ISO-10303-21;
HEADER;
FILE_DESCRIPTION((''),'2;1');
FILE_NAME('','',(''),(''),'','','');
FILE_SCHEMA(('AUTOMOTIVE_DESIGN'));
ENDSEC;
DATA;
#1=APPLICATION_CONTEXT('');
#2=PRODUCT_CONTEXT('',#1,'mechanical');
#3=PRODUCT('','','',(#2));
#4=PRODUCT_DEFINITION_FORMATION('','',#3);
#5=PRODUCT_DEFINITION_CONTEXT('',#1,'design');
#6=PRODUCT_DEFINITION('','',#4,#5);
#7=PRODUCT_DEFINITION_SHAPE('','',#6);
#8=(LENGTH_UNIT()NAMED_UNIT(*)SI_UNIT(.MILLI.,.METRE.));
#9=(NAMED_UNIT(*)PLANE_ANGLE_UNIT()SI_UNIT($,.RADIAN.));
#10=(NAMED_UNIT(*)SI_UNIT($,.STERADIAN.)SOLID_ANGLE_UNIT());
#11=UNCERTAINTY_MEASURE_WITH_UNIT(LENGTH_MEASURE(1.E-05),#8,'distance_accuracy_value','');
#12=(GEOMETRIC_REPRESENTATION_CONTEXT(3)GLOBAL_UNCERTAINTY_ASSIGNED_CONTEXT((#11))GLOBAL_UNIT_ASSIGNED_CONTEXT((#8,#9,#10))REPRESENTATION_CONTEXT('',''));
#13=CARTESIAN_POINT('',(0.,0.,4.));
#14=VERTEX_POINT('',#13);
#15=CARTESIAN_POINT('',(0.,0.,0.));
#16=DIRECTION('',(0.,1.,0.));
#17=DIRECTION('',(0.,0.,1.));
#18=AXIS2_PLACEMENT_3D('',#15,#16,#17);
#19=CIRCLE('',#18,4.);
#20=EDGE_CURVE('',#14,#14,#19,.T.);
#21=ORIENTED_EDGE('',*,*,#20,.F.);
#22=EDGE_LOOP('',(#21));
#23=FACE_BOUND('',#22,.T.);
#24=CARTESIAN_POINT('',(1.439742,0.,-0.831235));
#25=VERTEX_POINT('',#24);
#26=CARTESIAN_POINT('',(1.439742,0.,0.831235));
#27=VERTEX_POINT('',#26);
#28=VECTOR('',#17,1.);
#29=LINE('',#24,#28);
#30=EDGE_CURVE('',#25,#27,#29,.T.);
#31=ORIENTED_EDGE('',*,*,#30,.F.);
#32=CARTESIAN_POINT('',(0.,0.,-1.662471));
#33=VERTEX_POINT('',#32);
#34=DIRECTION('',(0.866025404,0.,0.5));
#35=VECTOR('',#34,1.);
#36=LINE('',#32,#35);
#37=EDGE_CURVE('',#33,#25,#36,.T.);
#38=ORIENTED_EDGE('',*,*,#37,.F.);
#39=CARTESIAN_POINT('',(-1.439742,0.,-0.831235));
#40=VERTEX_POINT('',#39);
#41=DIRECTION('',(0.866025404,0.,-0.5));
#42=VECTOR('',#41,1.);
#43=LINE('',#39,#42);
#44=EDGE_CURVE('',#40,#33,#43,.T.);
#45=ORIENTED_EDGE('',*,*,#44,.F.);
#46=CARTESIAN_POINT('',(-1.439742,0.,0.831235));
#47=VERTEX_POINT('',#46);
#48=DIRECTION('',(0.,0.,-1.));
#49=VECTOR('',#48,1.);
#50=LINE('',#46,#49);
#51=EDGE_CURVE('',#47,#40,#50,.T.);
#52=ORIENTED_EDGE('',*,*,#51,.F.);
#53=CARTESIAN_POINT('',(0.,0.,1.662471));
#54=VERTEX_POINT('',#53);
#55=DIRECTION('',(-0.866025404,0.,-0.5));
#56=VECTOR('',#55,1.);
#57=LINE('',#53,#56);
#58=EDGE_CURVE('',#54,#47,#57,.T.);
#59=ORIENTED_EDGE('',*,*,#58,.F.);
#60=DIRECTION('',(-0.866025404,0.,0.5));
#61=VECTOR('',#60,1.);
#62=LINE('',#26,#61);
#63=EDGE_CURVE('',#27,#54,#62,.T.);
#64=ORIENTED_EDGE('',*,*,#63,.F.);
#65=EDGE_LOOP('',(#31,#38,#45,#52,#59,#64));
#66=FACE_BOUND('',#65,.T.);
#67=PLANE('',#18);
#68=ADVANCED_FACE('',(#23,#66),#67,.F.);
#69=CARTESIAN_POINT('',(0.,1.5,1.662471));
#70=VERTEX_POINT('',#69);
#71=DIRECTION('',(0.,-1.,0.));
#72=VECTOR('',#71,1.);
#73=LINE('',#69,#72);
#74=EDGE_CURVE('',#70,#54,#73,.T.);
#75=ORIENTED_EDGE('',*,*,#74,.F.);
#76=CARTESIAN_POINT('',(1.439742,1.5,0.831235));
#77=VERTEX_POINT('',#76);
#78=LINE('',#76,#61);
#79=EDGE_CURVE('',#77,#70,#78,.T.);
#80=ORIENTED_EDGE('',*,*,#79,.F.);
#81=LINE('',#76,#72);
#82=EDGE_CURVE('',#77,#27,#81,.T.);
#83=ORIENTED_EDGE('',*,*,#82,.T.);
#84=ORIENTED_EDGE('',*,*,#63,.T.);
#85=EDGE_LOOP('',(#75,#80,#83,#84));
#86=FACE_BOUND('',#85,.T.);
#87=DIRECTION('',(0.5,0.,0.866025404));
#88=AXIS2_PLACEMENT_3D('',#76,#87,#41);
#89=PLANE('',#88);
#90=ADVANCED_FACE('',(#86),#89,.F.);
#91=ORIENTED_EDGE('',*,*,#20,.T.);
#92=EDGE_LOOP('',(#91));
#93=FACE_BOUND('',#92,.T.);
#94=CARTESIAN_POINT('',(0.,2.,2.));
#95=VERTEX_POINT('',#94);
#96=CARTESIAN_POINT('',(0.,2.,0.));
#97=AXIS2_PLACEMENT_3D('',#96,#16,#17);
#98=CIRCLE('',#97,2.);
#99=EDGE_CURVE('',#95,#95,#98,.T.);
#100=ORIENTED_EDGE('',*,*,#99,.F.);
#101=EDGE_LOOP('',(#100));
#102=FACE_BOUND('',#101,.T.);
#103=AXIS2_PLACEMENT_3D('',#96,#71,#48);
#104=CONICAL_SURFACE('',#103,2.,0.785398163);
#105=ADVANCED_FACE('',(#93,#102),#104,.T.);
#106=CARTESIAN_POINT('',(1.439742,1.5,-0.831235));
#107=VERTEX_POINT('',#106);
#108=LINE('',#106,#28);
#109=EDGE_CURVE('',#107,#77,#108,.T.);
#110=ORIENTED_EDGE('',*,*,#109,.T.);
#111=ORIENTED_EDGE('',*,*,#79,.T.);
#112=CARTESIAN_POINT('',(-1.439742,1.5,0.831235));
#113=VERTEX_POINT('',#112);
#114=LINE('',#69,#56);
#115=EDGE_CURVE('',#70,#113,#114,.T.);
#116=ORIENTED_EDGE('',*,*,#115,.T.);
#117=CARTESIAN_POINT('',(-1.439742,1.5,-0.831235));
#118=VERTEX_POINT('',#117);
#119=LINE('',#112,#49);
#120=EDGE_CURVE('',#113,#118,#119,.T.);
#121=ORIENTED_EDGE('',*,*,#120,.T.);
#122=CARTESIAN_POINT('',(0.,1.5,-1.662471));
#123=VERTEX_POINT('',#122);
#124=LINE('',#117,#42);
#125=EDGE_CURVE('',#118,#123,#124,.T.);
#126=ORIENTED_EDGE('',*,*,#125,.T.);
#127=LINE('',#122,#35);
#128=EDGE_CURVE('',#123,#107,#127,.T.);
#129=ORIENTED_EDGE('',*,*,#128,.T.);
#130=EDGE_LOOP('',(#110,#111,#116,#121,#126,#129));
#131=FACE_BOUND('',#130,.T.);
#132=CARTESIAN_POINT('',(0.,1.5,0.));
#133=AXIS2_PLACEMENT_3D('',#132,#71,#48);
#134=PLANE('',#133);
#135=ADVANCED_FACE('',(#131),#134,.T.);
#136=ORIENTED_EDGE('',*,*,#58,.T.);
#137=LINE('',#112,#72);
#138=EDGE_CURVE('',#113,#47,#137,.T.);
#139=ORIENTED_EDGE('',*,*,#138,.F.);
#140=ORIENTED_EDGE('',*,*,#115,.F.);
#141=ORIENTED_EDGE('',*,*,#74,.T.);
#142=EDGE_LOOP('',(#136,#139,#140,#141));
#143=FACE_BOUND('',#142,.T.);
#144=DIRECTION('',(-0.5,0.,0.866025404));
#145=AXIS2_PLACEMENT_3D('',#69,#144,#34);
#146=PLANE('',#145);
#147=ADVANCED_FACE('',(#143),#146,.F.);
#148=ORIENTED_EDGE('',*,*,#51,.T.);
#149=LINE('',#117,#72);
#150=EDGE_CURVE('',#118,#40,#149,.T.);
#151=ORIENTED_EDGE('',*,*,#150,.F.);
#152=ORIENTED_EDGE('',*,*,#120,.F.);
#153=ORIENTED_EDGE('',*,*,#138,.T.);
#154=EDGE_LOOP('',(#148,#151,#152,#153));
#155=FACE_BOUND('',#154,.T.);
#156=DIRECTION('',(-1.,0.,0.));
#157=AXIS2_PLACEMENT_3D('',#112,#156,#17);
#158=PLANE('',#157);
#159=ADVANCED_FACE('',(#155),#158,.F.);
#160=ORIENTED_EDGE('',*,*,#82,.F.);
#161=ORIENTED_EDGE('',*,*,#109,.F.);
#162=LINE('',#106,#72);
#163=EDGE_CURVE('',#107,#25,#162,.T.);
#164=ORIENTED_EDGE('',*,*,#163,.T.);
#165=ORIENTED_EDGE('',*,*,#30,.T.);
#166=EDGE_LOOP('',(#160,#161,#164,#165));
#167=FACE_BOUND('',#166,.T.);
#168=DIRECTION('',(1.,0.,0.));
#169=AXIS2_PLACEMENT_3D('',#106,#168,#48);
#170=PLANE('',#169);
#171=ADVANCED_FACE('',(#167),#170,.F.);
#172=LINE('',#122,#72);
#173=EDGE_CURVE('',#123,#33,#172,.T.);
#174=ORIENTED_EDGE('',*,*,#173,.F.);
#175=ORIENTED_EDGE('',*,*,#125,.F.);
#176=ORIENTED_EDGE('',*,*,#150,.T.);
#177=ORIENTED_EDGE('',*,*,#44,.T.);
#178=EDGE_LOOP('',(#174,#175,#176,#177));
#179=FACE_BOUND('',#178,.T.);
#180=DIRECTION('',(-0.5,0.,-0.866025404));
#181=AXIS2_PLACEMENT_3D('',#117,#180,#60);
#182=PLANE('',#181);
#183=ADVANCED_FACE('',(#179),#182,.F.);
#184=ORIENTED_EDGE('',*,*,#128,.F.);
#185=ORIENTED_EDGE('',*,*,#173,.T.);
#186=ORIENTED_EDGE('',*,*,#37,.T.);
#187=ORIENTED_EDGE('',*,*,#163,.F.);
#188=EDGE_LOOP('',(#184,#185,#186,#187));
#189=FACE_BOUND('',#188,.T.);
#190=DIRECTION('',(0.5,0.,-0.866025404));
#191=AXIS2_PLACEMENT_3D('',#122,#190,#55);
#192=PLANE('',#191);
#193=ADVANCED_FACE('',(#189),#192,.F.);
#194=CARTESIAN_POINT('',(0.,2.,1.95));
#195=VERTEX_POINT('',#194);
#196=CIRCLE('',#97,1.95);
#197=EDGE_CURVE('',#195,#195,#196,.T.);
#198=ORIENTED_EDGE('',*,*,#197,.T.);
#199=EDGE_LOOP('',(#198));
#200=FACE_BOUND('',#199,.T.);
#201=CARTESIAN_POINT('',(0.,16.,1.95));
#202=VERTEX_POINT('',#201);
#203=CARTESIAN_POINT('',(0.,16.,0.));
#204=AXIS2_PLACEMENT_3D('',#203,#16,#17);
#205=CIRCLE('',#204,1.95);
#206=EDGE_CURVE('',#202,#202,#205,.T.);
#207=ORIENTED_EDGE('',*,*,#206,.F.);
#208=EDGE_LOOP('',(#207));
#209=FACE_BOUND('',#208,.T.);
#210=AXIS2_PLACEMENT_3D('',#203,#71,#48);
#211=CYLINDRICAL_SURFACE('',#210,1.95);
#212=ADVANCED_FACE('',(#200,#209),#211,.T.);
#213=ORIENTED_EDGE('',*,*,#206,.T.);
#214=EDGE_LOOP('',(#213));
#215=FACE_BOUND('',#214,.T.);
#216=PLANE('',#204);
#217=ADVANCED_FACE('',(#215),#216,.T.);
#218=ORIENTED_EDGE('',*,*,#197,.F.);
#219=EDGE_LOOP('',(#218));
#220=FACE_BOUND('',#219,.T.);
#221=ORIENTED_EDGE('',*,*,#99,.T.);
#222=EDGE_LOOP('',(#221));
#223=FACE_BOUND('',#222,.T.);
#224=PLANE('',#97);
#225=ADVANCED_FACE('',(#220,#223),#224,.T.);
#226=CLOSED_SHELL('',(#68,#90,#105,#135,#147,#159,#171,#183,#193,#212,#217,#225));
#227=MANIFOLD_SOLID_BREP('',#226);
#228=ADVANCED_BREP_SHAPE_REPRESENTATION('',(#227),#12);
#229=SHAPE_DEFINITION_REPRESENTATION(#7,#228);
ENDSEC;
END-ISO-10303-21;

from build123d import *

# Parameters (mm, degrees)
SKETCH1_R           = 4
BOSS_EXTRUDE1_DEPTH = 2
SKETCH2_R           = 1.95
BOSS_EXTRUDE2_DEPTH = 14
CHAMFER1_SIZE       = 2
CUT_EXTRUDE1_DEPTH  = 1.5


with BuildPart() as part:
    # Sketch1 → Boss-Extrude1 (new body)
    with BuildSketch(Plane(origin=(0, 0, 0), x_dir=(1, 0, 0), z_dir=(0, 1, 0))):
        with Locations(Location((0, 0, 0), (0, 0, 270))):
            Circle(SKETCH1_R)
    extrude(amount=BOSS_EXTRUDE1_DEPTH)

    # Sketch2 → Boss-Extrude2 (add)
    with BuildSketch(Plane(origin=(0, 2, 0), x_dir=(1, 0, 0), z_dir=(0, 1, 0))):
        with Locations(Location((0, 0, 0), (0, 0, 270))):
            Circle(SKETCH2_R)
    extrude(amount=BOSS_EXTRUDE2_DEPTH)

    # Chamfer1
    chamfer1_edges = [part.edges().sort_by_distance(p)[0] for p in [
        (0, 2, -4),
    ]]
    chamfer(chamfer1_edges, length=CHAMFER1_SIZE - 0.0001)  # a hair under: the kernel refuses the full size

    # Sketch3 → Cut-Extrude1 (cut)
    with BuildSketch(Plane.XZ):
        Polygon((0, -1.662470902), (1.439742034, -0.831235451), (1.439742034, 0.831235451), (0, 1.662470902), (-1.439742034, 0.831235451), (-1.439742034, -0.831235451), align=None)
    extrude(amount=-CUT_EXTRUDE1_DEPTH, mode=Mode.SUBTRACT)


solid = part.part
